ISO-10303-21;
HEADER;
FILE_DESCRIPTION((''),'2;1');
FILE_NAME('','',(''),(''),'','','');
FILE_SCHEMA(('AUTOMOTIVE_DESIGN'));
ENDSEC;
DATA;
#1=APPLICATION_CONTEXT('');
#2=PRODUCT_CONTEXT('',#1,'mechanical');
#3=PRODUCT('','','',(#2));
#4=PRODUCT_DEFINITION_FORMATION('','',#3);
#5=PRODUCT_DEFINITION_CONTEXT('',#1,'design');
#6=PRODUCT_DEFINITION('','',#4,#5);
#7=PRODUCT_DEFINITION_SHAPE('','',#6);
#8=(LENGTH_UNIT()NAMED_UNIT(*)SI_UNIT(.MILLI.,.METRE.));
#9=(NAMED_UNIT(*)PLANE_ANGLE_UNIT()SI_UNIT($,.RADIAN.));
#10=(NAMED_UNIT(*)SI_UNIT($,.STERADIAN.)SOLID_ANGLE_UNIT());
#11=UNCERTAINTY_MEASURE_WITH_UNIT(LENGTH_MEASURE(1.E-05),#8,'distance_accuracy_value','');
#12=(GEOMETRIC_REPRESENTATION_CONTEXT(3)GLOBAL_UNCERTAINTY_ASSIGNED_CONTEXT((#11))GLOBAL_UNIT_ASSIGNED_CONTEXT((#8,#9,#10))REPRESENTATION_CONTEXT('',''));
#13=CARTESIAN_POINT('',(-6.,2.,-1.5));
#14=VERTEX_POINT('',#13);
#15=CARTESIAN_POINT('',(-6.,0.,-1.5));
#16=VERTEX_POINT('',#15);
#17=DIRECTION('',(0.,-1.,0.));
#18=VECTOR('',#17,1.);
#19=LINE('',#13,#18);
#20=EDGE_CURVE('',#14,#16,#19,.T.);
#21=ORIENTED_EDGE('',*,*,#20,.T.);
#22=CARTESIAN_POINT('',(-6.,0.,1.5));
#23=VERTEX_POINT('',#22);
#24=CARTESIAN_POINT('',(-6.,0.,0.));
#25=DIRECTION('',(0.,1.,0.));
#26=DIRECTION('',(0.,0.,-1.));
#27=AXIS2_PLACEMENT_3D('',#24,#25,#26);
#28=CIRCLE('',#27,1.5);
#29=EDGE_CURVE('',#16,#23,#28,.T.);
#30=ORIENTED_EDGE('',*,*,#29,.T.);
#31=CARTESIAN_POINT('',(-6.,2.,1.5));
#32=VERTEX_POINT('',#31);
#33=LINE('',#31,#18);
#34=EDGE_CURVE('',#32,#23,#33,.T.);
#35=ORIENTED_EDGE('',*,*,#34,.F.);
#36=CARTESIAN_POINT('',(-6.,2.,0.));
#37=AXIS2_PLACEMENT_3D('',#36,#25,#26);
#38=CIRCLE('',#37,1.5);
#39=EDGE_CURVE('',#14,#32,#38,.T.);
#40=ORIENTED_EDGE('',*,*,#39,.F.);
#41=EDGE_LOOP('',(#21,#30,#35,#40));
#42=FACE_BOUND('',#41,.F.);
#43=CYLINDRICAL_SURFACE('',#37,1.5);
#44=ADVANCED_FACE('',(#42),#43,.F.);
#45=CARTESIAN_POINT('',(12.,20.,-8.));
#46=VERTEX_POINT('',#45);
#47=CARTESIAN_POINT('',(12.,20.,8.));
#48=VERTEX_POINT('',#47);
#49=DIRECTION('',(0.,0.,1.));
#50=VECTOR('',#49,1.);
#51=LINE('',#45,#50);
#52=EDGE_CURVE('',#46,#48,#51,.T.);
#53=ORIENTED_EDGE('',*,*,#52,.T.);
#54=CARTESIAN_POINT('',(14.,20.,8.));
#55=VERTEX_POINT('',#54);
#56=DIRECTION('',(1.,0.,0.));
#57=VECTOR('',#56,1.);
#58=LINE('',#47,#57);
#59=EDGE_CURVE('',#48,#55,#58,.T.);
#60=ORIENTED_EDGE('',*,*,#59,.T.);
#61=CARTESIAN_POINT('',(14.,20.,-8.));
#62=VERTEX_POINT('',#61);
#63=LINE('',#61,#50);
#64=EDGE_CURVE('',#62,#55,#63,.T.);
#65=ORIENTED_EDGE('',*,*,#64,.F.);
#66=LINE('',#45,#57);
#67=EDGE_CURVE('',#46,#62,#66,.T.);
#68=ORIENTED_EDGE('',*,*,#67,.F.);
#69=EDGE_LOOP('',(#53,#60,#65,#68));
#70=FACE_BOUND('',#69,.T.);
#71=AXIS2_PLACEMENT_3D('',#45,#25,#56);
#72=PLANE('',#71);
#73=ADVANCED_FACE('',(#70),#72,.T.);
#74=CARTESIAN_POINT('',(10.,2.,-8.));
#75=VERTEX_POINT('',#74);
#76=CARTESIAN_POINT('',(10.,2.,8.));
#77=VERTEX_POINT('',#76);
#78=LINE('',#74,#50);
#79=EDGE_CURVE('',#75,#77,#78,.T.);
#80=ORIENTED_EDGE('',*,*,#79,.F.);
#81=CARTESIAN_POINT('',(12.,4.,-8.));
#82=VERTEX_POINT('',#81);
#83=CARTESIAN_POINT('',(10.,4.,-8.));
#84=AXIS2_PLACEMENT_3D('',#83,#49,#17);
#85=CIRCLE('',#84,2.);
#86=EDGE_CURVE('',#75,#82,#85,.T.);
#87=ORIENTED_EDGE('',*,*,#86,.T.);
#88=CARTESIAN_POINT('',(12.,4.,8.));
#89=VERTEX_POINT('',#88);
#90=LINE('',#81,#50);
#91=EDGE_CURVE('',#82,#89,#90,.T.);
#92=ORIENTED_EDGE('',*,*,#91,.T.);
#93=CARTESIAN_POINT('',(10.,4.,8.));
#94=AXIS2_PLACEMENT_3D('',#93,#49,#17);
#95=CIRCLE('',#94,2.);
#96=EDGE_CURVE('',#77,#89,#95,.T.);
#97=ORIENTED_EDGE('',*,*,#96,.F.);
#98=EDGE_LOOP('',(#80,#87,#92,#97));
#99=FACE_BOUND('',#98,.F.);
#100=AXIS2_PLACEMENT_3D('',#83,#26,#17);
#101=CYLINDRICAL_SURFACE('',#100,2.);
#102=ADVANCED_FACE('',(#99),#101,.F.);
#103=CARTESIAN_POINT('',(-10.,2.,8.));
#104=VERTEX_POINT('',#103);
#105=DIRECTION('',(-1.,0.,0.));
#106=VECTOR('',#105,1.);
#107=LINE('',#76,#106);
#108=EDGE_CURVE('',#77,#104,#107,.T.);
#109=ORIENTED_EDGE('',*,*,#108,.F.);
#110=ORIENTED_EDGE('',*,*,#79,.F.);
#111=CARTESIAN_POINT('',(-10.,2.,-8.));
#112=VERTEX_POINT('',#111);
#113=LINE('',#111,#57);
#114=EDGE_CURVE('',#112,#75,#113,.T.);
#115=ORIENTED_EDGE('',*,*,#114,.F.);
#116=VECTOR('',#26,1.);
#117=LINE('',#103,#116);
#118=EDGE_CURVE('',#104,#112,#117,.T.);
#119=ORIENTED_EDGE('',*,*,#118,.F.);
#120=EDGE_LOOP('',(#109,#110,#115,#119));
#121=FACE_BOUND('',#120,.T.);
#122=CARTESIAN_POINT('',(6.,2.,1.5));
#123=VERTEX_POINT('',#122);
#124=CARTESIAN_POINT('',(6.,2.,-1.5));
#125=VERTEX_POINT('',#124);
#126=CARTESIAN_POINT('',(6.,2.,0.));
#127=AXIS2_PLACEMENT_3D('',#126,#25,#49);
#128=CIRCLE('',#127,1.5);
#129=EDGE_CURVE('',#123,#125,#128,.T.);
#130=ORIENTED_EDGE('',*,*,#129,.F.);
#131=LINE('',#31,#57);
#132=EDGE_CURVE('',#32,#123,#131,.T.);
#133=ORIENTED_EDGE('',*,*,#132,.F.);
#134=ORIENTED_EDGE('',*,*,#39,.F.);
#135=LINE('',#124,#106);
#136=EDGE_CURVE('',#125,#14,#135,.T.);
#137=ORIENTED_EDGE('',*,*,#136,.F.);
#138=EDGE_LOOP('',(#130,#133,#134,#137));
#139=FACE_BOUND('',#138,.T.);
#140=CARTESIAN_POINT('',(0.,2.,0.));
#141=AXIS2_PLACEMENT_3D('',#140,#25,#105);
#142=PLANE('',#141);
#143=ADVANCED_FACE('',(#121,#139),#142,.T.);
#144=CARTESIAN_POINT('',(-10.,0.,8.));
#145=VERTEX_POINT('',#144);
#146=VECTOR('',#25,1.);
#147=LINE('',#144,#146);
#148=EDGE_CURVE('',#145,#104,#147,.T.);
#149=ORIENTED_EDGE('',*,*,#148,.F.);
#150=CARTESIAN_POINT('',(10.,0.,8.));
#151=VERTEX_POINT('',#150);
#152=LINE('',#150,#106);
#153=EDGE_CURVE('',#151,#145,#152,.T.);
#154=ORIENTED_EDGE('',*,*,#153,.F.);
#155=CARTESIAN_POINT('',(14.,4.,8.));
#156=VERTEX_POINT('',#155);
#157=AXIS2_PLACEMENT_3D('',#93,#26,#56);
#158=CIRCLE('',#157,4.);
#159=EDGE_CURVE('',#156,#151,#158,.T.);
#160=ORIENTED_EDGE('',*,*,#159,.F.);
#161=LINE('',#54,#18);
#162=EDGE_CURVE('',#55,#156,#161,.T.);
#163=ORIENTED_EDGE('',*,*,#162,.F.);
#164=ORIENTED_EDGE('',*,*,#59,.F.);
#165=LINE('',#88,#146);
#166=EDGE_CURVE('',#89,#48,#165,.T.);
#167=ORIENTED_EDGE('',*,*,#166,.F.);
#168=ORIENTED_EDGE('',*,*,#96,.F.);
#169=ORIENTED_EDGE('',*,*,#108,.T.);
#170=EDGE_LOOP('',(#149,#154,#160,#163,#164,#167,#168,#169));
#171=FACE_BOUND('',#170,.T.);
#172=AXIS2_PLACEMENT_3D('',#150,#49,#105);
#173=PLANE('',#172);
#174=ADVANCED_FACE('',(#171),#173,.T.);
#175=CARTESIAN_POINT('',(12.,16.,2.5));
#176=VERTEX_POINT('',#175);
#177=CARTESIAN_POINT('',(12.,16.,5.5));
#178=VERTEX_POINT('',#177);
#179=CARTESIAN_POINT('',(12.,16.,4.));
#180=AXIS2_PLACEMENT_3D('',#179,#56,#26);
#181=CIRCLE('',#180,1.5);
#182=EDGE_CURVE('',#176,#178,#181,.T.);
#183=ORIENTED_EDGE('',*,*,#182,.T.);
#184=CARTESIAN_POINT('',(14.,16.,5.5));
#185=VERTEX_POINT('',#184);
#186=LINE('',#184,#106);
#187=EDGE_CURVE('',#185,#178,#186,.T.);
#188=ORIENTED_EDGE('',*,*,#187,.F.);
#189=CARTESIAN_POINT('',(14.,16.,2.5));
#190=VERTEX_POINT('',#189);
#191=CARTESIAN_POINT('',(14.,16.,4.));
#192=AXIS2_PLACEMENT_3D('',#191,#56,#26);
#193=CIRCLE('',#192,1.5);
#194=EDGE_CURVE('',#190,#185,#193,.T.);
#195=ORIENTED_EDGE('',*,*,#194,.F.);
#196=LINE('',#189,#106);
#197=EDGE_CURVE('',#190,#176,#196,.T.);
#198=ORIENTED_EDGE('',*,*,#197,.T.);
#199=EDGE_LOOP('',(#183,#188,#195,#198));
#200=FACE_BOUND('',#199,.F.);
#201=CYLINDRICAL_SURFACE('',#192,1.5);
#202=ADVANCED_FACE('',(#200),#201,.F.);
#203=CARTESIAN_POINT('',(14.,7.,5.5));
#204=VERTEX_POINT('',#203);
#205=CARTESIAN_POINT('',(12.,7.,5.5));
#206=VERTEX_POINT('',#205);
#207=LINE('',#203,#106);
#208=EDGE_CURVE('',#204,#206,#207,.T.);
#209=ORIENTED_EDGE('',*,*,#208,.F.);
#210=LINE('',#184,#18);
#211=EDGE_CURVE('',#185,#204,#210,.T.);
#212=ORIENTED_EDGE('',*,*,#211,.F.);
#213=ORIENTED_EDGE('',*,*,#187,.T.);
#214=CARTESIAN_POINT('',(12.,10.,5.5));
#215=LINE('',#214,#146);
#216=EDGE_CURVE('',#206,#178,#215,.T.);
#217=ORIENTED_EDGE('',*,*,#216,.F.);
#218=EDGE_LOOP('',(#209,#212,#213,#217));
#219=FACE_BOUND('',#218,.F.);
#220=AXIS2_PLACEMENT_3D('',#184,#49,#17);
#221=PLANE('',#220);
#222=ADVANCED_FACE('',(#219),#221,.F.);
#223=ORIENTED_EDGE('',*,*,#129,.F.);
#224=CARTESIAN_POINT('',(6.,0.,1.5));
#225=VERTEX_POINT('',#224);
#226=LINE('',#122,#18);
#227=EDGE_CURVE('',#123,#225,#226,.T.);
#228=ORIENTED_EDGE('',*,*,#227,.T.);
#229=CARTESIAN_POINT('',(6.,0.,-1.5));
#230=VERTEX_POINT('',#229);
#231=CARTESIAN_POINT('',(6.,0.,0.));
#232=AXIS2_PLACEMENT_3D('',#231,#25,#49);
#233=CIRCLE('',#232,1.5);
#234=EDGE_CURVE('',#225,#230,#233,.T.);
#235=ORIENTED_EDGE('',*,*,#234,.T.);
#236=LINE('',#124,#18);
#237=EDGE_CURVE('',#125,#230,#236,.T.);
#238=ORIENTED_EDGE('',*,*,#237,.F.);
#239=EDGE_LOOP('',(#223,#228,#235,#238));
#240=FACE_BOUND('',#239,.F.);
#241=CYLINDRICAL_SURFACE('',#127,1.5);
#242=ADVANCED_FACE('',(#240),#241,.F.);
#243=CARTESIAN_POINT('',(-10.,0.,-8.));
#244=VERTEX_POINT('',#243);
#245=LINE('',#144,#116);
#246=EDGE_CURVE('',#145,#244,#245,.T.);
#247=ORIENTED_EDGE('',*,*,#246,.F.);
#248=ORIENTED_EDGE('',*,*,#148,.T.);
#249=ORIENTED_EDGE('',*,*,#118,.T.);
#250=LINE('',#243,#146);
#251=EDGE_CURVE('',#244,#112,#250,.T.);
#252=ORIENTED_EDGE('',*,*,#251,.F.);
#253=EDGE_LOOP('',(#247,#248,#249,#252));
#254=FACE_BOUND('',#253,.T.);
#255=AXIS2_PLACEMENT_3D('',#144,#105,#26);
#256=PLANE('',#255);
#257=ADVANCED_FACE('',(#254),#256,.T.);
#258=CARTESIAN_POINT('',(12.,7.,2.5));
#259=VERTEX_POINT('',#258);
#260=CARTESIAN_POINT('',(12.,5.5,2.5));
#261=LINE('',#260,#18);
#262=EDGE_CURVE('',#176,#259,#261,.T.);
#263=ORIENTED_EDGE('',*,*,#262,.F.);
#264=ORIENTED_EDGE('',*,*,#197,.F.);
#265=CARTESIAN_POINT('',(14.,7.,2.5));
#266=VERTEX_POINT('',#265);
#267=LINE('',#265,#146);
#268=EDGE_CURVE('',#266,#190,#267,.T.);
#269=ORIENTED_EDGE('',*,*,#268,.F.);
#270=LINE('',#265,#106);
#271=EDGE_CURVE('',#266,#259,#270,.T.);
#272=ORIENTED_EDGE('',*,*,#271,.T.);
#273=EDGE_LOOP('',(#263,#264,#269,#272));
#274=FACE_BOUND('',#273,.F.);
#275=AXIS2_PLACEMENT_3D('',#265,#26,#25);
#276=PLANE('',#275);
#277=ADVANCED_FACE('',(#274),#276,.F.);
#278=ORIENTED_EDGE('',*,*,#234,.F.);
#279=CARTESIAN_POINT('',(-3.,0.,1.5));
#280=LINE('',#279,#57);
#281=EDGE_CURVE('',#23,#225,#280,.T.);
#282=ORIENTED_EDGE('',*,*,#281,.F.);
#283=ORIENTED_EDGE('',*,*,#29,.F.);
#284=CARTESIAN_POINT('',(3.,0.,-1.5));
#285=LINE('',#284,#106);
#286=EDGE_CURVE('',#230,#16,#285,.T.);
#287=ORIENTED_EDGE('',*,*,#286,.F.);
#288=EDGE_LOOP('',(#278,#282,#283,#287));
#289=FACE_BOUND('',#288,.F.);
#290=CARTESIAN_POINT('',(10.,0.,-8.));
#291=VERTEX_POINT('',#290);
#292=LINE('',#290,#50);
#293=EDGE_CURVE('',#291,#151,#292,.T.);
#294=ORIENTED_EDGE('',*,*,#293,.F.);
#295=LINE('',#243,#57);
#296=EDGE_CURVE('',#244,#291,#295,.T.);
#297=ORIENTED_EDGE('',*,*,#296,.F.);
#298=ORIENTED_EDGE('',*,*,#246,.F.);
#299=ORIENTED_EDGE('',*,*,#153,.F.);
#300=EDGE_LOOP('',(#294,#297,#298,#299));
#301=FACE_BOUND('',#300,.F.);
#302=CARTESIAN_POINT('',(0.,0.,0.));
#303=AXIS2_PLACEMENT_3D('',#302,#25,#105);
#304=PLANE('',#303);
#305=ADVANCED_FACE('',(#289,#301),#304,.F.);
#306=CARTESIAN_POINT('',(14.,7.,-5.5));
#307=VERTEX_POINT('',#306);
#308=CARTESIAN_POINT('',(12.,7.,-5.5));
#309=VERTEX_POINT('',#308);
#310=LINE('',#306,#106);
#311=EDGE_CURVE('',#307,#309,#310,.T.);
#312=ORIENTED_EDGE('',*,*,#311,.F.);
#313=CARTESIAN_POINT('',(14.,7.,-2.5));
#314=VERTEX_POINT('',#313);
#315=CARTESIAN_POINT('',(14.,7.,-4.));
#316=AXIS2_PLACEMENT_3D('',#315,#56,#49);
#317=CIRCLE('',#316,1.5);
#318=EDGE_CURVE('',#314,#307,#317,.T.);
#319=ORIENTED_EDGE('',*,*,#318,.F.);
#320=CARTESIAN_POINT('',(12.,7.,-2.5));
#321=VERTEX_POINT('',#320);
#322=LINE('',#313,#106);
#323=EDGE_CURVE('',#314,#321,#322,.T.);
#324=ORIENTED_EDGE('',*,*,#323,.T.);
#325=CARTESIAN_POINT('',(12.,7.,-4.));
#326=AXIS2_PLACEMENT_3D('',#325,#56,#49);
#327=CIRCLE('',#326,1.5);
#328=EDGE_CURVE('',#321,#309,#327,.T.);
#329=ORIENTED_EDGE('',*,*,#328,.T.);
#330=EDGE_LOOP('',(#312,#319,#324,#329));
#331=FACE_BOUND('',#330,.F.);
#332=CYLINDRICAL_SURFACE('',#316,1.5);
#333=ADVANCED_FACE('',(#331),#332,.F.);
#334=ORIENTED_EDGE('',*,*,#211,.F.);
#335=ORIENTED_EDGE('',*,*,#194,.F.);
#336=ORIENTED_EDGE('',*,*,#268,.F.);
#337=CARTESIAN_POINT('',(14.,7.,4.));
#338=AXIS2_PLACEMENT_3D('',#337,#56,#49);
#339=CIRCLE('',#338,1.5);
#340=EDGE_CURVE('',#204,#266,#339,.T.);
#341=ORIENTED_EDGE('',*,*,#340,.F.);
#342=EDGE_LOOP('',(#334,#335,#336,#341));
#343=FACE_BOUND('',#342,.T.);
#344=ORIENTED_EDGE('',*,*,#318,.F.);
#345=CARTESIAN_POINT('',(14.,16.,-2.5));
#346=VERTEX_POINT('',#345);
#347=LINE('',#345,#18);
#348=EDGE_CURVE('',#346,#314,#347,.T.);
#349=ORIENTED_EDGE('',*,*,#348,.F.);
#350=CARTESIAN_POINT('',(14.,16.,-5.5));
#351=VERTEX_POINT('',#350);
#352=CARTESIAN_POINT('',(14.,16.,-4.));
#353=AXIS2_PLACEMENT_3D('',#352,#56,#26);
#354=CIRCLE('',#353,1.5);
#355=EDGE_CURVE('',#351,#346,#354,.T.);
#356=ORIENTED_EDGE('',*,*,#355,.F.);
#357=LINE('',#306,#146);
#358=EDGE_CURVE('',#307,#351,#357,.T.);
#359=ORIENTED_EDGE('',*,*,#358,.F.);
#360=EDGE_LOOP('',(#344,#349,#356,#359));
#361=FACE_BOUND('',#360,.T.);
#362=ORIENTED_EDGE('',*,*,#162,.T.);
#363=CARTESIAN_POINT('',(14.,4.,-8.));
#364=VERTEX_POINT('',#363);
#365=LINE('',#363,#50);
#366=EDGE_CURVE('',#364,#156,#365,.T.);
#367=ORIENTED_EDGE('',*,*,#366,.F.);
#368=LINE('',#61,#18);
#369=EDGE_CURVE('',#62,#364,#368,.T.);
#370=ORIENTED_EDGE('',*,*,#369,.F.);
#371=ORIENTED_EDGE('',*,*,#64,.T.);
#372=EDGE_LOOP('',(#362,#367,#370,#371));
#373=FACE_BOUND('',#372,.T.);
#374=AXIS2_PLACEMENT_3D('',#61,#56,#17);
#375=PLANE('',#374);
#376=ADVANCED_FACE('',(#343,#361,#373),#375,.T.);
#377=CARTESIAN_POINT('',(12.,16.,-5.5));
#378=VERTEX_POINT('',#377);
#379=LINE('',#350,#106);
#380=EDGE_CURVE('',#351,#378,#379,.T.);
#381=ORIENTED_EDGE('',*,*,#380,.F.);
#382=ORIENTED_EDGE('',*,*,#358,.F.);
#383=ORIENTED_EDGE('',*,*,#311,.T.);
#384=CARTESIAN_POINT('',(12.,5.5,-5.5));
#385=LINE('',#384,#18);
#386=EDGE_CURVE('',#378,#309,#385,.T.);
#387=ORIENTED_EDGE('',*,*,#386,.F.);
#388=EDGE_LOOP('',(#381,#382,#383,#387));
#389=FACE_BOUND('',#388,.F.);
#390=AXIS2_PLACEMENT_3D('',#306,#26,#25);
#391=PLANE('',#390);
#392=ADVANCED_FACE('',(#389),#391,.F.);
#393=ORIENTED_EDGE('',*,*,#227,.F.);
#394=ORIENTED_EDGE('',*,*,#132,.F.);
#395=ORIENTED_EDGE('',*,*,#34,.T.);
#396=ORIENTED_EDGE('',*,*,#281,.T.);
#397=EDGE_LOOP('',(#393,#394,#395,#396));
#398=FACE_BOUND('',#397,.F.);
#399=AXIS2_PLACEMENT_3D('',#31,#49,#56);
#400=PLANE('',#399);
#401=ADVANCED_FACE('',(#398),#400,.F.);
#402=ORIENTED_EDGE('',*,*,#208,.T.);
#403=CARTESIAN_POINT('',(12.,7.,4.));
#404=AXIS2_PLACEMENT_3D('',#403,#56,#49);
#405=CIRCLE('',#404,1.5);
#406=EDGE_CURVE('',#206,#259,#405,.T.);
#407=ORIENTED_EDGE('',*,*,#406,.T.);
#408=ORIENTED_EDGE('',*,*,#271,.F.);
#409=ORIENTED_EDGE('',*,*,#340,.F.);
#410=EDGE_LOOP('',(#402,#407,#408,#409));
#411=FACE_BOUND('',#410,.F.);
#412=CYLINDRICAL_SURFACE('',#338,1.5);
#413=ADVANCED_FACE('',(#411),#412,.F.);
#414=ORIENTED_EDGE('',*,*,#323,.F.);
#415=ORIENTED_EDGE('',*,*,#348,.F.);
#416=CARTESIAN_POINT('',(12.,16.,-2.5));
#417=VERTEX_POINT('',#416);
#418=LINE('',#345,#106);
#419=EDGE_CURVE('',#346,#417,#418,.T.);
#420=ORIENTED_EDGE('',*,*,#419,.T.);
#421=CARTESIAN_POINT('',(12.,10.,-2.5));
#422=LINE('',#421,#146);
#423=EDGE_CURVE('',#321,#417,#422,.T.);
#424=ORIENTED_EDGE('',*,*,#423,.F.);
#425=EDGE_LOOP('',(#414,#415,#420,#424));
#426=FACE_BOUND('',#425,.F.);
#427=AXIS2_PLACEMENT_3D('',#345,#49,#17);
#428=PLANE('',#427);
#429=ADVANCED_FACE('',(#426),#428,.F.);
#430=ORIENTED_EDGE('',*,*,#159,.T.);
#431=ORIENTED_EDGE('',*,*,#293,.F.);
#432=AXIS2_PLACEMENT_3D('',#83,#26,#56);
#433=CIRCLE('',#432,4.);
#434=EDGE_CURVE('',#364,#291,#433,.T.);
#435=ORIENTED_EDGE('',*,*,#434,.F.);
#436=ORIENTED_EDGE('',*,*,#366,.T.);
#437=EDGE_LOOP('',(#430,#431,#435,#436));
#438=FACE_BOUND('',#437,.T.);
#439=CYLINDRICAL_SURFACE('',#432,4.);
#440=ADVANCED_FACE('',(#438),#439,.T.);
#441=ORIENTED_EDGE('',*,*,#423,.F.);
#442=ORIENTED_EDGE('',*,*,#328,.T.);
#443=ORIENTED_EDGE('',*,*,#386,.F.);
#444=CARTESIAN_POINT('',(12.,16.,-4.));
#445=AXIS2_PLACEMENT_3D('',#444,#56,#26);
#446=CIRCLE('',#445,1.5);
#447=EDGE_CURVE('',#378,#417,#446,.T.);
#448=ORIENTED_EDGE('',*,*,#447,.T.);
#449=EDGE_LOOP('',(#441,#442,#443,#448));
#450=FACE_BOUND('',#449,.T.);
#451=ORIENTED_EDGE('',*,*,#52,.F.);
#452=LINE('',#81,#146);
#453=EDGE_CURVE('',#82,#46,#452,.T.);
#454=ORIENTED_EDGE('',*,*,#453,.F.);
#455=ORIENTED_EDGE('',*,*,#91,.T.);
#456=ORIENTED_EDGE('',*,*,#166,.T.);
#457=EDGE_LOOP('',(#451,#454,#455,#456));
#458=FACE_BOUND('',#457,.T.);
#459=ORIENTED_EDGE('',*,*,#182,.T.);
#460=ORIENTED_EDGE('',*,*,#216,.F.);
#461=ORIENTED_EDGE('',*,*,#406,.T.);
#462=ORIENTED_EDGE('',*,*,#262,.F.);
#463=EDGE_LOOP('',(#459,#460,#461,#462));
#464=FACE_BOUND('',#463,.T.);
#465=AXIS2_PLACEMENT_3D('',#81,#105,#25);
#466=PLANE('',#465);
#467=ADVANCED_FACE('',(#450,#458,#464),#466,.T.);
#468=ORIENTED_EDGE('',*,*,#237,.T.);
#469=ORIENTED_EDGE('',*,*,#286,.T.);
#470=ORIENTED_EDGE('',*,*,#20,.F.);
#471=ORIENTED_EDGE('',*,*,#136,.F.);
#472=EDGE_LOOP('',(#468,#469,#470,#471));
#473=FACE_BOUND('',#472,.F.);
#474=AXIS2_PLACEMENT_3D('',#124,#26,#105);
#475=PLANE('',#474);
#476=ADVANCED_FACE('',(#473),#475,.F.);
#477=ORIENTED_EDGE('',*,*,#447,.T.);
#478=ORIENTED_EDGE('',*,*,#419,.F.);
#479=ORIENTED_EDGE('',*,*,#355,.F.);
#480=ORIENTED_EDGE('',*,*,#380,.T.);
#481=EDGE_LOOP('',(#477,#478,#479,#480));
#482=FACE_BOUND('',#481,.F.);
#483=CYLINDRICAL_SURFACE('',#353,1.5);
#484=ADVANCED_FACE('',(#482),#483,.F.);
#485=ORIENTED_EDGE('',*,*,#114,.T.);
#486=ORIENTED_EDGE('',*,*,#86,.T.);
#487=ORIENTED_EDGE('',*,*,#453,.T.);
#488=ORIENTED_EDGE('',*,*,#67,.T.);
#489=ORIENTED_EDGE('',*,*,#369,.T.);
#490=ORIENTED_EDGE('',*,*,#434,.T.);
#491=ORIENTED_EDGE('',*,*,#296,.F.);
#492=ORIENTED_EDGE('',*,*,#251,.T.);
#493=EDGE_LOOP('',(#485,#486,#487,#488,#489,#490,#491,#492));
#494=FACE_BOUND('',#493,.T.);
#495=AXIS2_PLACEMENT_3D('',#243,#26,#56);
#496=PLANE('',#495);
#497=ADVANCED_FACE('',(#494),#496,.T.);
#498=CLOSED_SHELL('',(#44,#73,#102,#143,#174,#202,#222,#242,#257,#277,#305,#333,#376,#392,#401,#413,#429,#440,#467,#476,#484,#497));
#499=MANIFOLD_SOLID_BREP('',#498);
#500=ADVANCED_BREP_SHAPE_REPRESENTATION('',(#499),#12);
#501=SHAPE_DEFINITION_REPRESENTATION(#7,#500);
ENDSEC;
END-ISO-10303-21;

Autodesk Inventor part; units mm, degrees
ref_plane "YZ Plane" through (0, 0, 0) normal (1, 0, 0) x (0, 1, 0)
ref_plane "XZ Plane" through (0, 0, 0) normal (0, 1, 0) x (-1, 0, 0)
ref_plane "XY Plane" through (0, 0, 0) normal (0, 0, 1) x (1, 0, 0)
sketch "スケッチ1" plane through (0, 0, 0) normal (0, 1, 0) x (-1, 0, 0)
  line L0 (-10, 8) -> (10, 8)
  line L1 (10, 8) -> (10, -8)
  line L2 (10, -8) -> (-10, -8)
  line L3 (-10, -8) -> (-10, 8)
  line L4 (-10, 8) -> (10, -8) construction
  line L5 (10, 8) -> (-10, -8) construction
  point P0 (0, 0)
  dimension "d0" = 20
  dimension "d1" = 16
extrude "プレート1" add sketch "スケッチ1" along normal blind 2
sketch "スケッチ2" plane through (12, 4, -8) normal (1, 0, 0) x (0, 1, 0)
  line L0 (0, 16) -> (0, 0)
  line L1 (0, 0) -> (16, 0)
  line L2 (16, 0) -> (16, 16)
  line L3 (16, 16) -> (0, 16)
edge flange "フランジ1" height 20 angle 90 thickness 2 bend radius 2 thickness toward (1, 0, 0) relief tear relief width 2 relief depth 1 edges at (10, 2, 0) wall of the first edge with corners at (12, 4, 8) (12, 4, -8) (12, 20, -8) (12, 20, 8)
bend "曲げ1"
corner "コーナー1"
sketch "スケッチ3" plane through (14, 20, 8) normal (1, 0, 0) x (0, 0, -1)
  line L0 (2.5, -4) -> (2.5, -13)
  arc A0 (2.5, -13) -> (5.5, -13) centre (4, -13) ccw
  line L1 (5.5, -13) -> (5.5, -4)
  arc A1 (5.5, -4) -> (2.5, -4) centre (4, -4) ccw
  line L2 (10.5, -4) -> (10.5, -13)
  arc A2 (10.5, -13) -> (13.5, -13) centre (12, -13) ccw
  line L3 (13.5, -13) -> (13.5, -4)
  arc A3 (13.5, -4) -> (10.5, -4) centre (12, -4) ccw
  line L4 (0, -16) -> (0, 0) projected
  line L5 (16, 0) -> (16, -16) projected
  line L6 (0, 0) -> (16, 0) projected
  line L7 (0, -16) -> (16, -16) projected
  point P0 (8, -20)
  dimension "d13" = 4
  dimension "d14" = 4
  dimension "d17" = 3
  dimension "d18" = 4
  dimension "d19" = 1.5
  dimension "d20" = 1.5
extrude "押し出し1" cut sketch "スケッチ3" against normal blind 10 contours A1 L1 A0 L0 | A3 L3 A2 L2
sketch "スケッチ4" plane through (0, 2, 0) normal (0, 1, 0) x (1, 0, 0)
  line L0 (-6, -1.5) -> (6, -1.5)
  arc A0 (6, -1.5) -> (6, 1.5) centre (6, 0) ccw
  line L1 (6, 1.5) -> (-6, 1.5)
  arc A1 (-6, 1.5) -> (-6, -1.5) centre (-6, 0) ccw
  line L2 (-10, -8) -> (-10, 8) projected
  line L3 (10, 8) -> (10, -8) projected
  point P0 (0, 0)
  dimension "d23" = 4
  dimension "d24" = 4
  dimension "d25" = 1.5
extrude "押し出し2" cut sketch "スケッチ4" against normal blind 10
equation "\"d2\" = Thickness"
equation "\"d3\" = BendReliefWidth"
equation "\"d4\" = BendReliefDepth"
equation "\"d5\" = MinimumRemnant"
equation "\"d6\" = TransitionRadius"
equation "\"d9\" = BendRadius"
equation "\"d10\" = CornerReliefSize"
equation "\"d11\" = GapSize"
equation "\"d12\" = JacobiRadiusSize"
equation "\"BendRadius\" = Thickness"
equation "\"BendReliefWidth\" = Thickness"
equation "\"BendReliefDepth\" = 0.5 * Thickness"
equation "\"CornerReliefSize\" = 4 * Thickness"
equation "\"MinimumRemnant\" = 2 * Thickness"
equation "\"TransitionRadius\" = BendRadius"
equation "\"JacobiRadiusSize\" = BendRadius"
equation "\"GapSize\" = Thickness"
equation "\"Thickness\" = 2"
properties part number "keyL_medium" material "アルミニウム 6061"
